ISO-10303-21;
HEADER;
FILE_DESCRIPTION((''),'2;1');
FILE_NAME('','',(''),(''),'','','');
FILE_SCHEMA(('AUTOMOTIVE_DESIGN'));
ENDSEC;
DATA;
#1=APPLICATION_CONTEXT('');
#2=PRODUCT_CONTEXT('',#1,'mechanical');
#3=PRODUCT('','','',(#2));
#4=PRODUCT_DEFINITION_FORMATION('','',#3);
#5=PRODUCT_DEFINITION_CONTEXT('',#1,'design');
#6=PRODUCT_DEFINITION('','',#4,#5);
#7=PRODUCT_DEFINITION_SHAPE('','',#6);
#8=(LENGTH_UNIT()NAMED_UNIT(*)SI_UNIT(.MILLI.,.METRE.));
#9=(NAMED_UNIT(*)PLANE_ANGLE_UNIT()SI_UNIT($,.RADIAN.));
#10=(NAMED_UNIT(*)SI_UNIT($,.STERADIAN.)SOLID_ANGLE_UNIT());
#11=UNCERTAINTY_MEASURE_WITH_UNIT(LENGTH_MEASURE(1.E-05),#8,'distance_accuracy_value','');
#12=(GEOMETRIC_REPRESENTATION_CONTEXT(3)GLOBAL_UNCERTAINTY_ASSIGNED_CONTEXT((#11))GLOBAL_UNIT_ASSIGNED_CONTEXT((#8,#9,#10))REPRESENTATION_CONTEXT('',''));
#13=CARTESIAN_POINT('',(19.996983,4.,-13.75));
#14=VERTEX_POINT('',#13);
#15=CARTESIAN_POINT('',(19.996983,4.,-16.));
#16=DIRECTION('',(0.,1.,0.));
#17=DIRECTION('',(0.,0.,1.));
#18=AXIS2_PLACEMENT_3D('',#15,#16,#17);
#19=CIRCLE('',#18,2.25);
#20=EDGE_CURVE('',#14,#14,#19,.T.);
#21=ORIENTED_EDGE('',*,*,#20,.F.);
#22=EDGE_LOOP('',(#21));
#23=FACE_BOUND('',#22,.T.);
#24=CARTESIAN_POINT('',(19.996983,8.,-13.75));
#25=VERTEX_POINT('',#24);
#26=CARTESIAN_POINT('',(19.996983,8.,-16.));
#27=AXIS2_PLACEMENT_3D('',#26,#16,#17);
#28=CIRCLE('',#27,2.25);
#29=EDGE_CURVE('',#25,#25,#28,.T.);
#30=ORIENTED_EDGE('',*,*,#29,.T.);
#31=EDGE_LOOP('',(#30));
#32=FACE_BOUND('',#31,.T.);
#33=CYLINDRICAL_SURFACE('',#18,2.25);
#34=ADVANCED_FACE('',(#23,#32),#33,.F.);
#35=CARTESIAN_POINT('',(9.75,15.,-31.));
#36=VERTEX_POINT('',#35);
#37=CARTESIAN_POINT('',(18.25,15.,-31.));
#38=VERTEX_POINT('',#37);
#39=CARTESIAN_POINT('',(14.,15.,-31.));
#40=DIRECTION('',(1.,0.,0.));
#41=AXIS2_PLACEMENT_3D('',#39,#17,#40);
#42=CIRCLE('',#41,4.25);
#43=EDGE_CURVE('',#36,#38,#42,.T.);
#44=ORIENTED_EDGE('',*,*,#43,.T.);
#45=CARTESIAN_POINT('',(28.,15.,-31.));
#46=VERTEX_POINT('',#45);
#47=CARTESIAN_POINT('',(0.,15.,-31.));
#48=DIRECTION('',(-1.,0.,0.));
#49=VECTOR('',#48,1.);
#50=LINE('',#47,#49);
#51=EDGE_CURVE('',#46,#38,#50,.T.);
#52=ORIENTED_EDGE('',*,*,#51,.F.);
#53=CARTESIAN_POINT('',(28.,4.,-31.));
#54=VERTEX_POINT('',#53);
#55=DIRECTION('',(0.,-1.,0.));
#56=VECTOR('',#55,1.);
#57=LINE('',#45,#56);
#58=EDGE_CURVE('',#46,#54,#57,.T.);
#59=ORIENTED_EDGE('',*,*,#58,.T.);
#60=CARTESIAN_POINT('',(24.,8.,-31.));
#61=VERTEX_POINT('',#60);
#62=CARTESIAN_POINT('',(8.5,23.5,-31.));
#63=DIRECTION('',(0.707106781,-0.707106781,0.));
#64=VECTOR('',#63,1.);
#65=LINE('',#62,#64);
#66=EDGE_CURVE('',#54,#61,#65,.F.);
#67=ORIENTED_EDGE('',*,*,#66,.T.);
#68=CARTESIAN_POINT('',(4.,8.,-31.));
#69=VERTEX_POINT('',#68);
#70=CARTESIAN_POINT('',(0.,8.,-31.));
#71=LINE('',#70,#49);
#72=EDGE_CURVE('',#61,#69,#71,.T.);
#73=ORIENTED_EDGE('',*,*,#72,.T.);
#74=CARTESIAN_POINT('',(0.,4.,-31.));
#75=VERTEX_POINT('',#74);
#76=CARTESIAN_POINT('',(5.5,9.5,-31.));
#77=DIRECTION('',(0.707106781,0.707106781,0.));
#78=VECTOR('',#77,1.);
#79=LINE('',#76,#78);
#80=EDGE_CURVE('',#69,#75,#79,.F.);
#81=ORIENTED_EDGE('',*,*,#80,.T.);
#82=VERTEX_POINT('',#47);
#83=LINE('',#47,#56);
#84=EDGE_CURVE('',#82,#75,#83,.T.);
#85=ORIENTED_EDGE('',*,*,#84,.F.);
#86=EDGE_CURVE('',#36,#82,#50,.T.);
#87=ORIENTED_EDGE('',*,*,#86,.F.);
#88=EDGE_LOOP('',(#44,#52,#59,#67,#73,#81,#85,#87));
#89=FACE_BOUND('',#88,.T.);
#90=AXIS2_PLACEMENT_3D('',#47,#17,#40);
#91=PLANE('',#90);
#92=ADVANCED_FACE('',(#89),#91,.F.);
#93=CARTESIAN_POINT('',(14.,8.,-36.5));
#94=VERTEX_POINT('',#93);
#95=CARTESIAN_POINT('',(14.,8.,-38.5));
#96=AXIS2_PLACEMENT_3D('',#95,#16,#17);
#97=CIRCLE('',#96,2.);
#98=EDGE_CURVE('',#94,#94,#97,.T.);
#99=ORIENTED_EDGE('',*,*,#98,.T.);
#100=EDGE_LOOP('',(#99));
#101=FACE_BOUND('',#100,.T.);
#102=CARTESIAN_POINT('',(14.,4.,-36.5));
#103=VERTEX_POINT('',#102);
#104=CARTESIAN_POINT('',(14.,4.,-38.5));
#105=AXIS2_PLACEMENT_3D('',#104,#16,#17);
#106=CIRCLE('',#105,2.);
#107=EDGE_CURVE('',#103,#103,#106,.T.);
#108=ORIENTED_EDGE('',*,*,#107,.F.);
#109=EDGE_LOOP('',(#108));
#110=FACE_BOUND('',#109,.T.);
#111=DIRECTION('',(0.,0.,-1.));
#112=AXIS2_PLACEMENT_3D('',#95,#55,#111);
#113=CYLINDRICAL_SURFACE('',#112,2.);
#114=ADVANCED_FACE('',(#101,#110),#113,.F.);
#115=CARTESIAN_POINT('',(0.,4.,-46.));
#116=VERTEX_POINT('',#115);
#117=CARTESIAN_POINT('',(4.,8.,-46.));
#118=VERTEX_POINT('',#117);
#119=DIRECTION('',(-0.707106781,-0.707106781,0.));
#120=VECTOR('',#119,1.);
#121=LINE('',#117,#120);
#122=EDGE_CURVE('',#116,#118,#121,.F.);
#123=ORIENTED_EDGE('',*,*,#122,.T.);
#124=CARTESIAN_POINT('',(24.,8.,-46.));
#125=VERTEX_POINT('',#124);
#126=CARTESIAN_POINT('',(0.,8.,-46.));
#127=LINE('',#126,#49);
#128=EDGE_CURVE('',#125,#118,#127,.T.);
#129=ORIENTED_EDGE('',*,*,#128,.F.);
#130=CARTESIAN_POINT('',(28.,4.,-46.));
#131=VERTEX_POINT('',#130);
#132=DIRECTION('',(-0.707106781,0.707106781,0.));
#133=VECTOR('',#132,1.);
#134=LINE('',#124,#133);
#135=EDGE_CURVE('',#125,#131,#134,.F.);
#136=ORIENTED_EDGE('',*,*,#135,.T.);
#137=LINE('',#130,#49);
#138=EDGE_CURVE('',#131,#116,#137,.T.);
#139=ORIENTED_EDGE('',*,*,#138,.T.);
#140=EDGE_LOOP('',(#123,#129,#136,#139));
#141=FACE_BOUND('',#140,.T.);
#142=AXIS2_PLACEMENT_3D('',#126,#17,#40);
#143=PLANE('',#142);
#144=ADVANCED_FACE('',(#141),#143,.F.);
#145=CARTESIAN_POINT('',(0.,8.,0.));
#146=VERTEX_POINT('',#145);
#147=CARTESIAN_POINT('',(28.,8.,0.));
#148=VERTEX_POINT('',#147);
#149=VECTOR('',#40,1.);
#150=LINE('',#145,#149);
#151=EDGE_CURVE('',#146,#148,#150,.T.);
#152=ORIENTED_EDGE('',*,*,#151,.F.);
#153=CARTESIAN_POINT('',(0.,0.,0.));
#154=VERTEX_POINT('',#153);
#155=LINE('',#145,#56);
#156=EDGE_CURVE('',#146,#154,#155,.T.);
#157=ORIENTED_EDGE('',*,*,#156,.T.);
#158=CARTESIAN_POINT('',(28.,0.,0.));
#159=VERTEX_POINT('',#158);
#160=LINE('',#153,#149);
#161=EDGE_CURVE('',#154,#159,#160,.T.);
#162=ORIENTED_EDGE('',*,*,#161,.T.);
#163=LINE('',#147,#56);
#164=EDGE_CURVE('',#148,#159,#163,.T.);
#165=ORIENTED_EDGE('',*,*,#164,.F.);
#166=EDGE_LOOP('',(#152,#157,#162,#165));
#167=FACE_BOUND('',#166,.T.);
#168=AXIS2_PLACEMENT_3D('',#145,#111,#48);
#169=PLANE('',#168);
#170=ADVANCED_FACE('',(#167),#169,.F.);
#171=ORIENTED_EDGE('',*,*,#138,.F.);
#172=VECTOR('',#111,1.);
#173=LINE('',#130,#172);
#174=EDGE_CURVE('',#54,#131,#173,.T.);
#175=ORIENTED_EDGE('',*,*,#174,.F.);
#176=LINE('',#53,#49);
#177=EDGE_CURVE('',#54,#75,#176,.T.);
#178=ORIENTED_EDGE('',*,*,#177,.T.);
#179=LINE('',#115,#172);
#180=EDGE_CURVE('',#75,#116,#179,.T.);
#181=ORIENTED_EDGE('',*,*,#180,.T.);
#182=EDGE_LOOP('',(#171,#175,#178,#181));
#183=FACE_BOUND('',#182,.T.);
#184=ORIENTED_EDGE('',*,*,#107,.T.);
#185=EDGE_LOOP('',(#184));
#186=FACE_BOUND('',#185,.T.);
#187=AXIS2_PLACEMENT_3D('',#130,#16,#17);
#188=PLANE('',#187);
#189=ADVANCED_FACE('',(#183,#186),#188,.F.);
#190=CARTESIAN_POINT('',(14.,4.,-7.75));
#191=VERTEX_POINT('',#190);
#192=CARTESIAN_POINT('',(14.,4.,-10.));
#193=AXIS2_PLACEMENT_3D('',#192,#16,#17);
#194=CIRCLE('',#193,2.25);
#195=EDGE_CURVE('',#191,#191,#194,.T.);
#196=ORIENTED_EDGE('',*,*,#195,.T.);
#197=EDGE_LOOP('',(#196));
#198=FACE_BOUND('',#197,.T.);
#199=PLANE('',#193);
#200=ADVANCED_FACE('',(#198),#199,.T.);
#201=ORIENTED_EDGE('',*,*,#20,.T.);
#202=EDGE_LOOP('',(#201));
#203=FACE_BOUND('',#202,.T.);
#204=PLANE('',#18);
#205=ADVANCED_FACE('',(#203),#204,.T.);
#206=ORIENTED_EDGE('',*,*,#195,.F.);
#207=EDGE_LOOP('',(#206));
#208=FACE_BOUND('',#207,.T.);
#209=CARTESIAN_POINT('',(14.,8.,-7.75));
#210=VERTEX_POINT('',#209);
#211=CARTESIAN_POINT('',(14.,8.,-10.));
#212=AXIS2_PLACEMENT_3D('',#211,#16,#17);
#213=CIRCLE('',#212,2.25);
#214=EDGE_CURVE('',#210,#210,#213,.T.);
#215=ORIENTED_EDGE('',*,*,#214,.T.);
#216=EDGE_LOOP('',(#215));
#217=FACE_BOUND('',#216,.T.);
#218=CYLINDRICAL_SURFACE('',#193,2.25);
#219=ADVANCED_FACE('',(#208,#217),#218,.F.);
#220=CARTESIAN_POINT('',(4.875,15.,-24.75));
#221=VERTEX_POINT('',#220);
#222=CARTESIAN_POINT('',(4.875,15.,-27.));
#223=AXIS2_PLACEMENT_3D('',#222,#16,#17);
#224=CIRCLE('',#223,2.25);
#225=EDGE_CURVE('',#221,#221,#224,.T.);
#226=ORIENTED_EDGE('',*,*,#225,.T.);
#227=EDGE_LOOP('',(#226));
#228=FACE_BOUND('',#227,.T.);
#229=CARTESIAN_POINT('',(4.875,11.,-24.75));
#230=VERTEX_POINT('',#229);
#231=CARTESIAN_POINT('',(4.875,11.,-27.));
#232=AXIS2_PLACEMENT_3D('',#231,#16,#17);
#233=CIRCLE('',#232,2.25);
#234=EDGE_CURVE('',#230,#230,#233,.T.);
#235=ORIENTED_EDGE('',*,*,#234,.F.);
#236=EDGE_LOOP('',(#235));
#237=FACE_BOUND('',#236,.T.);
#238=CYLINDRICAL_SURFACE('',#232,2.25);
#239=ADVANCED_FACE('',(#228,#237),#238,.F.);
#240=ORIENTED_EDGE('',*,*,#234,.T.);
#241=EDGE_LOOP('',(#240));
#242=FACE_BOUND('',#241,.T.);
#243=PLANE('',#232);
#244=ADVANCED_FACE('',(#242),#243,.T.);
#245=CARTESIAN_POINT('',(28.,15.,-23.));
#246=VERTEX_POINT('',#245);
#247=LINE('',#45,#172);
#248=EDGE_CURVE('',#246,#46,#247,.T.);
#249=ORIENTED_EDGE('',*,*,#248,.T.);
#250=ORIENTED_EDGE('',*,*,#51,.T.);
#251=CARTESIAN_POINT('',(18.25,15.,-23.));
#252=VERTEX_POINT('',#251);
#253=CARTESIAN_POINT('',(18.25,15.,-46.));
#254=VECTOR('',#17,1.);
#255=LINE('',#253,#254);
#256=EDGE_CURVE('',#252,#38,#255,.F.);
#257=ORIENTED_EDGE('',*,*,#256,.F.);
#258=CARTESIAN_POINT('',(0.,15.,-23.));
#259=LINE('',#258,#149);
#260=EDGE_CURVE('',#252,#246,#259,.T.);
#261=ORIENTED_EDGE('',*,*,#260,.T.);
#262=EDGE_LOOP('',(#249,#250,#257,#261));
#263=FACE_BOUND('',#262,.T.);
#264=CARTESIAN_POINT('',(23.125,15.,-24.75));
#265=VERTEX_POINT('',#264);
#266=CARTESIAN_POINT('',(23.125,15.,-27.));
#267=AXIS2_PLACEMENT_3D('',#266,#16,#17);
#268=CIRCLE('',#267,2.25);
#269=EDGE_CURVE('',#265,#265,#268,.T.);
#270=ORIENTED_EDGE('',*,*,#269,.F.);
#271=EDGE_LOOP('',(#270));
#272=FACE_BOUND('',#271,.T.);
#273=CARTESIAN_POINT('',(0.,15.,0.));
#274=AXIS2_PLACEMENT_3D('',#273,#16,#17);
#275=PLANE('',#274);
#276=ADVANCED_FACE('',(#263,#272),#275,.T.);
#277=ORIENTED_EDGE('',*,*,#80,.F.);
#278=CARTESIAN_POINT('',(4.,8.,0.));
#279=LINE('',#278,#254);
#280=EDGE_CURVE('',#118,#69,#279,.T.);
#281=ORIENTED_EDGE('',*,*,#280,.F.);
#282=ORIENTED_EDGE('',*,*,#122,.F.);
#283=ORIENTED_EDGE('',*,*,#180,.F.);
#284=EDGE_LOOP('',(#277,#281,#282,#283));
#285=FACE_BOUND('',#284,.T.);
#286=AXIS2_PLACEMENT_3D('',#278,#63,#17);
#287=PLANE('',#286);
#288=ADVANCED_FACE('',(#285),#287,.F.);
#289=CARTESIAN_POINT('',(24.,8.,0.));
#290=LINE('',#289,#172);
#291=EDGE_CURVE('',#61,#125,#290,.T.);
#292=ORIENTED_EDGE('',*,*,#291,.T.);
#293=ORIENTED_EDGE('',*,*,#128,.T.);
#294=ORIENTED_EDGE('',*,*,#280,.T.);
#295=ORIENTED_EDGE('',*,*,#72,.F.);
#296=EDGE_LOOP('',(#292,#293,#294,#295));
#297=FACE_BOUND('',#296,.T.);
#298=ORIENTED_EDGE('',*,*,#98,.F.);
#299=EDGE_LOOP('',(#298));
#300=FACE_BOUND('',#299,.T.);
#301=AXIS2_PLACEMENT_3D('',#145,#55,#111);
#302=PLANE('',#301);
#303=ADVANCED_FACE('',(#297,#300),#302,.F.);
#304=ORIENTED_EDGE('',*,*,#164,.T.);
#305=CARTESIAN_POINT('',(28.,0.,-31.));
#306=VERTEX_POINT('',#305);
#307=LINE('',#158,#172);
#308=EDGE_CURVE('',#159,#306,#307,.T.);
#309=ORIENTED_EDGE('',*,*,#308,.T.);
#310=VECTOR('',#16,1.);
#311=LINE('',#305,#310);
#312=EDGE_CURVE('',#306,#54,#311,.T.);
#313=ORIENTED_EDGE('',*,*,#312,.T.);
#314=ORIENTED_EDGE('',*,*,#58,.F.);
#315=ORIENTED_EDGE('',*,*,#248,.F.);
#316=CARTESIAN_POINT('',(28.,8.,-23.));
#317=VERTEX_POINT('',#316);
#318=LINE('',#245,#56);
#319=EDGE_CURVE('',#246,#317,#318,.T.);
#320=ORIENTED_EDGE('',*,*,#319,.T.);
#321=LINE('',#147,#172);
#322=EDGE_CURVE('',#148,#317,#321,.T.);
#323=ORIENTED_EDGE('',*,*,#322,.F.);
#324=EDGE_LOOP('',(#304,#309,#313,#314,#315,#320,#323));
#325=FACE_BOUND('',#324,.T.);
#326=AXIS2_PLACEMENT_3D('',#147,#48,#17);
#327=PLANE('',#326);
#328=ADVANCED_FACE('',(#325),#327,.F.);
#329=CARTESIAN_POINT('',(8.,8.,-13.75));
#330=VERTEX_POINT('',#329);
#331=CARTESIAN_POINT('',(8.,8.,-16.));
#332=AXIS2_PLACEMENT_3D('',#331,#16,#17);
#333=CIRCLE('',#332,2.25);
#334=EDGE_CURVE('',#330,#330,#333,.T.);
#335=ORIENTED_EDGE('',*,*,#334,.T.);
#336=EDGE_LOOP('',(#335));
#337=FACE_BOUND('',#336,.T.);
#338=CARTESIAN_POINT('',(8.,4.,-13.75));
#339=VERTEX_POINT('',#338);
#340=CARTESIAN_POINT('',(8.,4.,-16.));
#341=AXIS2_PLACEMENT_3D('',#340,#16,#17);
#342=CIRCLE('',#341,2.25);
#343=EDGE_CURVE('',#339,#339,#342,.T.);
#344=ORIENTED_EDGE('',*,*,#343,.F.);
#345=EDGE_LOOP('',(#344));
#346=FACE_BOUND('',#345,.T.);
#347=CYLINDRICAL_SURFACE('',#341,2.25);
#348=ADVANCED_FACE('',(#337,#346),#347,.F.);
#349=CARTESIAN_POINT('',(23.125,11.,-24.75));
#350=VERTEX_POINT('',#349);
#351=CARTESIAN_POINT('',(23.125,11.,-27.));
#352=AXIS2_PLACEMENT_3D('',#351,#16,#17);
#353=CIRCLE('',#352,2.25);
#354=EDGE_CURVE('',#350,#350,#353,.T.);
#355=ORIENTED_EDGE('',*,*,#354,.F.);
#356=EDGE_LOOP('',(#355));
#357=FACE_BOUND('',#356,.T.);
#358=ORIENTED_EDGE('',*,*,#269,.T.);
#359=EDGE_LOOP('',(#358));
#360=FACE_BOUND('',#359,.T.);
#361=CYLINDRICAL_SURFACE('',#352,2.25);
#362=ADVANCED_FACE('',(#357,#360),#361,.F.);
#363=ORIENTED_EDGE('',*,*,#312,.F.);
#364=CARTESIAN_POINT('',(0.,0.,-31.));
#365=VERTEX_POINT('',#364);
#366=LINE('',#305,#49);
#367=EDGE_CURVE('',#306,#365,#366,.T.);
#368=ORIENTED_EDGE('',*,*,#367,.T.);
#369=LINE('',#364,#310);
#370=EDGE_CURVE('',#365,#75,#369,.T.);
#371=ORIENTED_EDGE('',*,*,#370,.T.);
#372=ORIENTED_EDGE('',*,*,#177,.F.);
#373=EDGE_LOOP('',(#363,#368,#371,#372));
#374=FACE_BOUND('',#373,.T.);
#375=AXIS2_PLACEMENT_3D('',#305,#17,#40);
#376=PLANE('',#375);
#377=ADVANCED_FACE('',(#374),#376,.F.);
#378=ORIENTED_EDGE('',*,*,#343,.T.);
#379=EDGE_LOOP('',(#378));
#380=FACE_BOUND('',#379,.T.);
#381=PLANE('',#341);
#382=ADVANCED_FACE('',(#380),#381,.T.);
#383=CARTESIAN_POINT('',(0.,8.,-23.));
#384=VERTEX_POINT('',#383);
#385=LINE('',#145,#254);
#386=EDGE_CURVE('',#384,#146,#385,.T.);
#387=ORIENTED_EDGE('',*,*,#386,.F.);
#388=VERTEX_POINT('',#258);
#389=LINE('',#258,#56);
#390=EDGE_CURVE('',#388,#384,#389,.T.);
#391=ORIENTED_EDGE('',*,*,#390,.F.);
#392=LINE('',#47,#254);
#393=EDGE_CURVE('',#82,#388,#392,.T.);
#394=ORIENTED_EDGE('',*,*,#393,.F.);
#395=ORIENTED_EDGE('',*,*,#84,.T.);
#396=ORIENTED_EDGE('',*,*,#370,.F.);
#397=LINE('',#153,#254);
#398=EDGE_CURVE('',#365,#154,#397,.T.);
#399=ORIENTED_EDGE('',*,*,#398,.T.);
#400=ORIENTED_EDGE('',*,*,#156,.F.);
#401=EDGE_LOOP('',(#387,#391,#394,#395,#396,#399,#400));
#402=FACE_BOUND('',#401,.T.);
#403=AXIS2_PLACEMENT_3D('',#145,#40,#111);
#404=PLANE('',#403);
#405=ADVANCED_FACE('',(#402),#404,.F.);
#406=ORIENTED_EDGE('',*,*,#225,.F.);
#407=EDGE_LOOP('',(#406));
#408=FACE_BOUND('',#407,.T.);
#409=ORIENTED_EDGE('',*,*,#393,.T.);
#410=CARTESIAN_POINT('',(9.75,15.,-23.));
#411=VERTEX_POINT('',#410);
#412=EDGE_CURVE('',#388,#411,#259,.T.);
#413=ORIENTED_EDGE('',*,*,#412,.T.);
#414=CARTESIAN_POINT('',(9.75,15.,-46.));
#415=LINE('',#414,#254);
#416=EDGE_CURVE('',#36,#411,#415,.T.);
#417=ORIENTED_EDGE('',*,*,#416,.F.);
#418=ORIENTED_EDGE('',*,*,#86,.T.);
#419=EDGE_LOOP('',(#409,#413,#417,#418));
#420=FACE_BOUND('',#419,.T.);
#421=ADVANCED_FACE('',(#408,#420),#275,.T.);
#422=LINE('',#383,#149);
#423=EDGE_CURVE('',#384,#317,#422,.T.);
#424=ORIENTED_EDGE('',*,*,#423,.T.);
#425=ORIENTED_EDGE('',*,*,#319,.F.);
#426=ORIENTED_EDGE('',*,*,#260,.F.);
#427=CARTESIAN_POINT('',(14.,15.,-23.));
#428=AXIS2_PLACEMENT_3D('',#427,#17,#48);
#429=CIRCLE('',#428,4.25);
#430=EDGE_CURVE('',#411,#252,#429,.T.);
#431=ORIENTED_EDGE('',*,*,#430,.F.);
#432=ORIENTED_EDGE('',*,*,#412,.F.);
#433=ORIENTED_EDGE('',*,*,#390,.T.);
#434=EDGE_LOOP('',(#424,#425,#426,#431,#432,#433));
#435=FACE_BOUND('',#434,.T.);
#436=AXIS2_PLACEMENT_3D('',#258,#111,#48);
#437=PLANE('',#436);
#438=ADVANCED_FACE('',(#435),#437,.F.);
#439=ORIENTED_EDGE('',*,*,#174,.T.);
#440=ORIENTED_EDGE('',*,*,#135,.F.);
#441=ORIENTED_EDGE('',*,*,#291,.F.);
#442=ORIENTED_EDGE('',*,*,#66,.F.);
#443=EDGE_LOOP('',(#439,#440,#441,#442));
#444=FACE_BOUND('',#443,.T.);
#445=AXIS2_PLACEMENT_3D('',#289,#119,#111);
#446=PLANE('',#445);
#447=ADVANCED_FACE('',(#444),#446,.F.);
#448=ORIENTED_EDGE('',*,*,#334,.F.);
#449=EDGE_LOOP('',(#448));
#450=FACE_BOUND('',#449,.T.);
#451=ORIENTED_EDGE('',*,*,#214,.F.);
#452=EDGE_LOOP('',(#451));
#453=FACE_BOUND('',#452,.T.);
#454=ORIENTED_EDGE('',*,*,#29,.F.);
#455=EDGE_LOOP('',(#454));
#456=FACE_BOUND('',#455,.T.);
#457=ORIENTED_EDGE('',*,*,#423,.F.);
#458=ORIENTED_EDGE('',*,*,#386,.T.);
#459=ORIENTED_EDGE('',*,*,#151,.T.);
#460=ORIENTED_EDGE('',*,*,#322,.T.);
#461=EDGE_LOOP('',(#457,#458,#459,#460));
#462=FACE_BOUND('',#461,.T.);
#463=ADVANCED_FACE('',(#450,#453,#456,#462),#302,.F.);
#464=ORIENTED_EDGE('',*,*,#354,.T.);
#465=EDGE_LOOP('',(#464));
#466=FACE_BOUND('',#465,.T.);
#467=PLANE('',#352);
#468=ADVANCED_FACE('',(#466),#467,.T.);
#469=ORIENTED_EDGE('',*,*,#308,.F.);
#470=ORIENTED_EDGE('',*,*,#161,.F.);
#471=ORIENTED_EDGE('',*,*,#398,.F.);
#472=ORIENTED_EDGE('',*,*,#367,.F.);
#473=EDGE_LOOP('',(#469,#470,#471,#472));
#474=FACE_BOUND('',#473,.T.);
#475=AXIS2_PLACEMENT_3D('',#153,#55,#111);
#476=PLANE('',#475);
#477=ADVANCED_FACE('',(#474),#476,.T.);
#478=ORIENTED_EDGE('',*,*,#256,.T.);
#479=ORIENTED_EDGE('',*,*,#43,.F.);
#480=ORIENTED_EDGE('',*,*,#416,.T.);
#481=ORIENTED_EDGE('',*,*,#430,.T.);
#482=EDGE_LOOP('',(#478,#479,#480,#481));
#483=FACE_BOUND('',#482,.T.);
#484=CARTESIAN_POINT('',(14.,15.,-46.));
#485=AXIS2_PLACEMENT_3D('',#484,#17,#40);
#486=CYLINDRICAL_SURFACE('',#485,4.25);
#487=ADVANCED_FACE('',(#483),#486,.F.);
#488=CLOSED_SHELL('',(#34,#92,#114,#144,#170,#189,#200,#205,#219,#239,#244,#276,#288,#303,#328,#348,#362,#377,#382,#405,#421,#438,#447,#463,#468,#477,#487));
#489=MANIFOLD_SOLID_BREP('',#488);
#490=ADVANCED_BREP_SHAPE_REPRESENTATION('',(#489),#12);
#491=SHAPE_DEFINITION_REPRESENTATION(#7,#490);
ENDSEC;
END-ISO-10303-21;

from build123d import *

# Parameters (mm, degrees)
SKETCH1_W                             = 28
SKETCH1_H                             = 46
SKETCH1_R                             = 2
BOSS_EXTRUDE1_DEPTH                   = 8
SKETCH6_R                             = 2.25
DRAGCHAINMOUNTHOLESCUT_EXTRUDE1_DEPTH = 4
SKETCH2_W                             = 28
SKETCH2_H                             = 8
BRIDGEBOSS_EXTRUDE2_DEPTH             = 7
GROMMETCUT_EXTRUDE3_DEPTH             = 40.217343102
BRIDGEMOUNTHOLESSKETCH4_R             = 2.25
BRIDGEMOUNTHOLESCUT_EXTRUDE4_DEPTH    = 4
SKETCH5_W                             = 15
SKETCH5_H                             = 4
EDGECUT_EXTRUDE5_DEPTH                = 56.901699437
CHAMFER1_SIZE                         = 4


with BuildPart() as part:
    # Sketch1 → Boss-Extrude1 (new body)
    with BuildSketch(Plane(origin=(0, 0, 0), x_dir=(1, 0, 0), z_dir=(0, 1, 0))):
        with Locations((14, 23)):
            Rectangle(SKETCH1_W, SKETCH1_H)
        with Locations(Location((14, 38.5, 0), (0, 0, 270))):
            Circle(SKETCH1_R, mode=Mode.SUBTRACT)
    extrude(amount=BOSS_EXTRUDE1_DEPTH)

    # Sketch6 → DragChainMountHolesCut-Extrude1 (cut)
    with BuildSketch(Plane(origin=(0, 8, 0), x_dir=(1, 0, 0), z_dir=(0, 1, 0))):
        with Locations(Location((8, 16, 0), (0, 0, 270))):
            Circle(SKETCH6_R)
        with Locations(Location((19.996983409, 16, 0), (0, 0, 270))):
            Circle(SKETCH6_R)
        with Locations(Location((14, 10, 0), (0, 0, 270))):
            Circle(SKETCH6_R)
    extrude(amount=-DRAGCHAINMOUNTHOLESCUT_EXTRUDE1_DEPTH, mode=Mode.SUBTRACT)

    # Sketch2 → BridgeBoss-Extrude2 (add)
    with BuildSketch(Plane(origin=(0, 8, 0), x_dir=(1, 0, 0), z_dir=(0, 1, 0))):
        with Locations((14, 27)):
            Rectangle(SKETCH2_W, SKETCH2_H)
    extrude(amount=BRIDGEBOSS_EXTRUDE2_DEPTH)

    # Sketch3 → GrommetCut-Extrude3 (cut, through all)
    with BuildSketch(Plane.XY.offset(-23)):
        with BuildLine():
            Line((9.75, 15), (18.25, 15))
            ThreePointArc((18.25, 15), (14, 10.75), (9.75, 15))
        make_face()
    extrude(amount=-GROMMETCUT_EXTRUDE3_DEPTH, mode=Mode.SUBTRACT)

    # BridgeMountHolesSketch4 → BridgeMountholesCut-Extrude4 (cut)
    with BuildSketch(Plane(origin=(0, 15, 0), x_dir=(1, 0, 0), z_dir=(0, 1, 0))):
        with Locations(Location((4.875, 27, 0), (0, 0, 270))):
            Circle(BRIDGEMOUNTHOLESSKETCH4_R)
        with Locations(Location((23.125, 27, 0), (0, 0, 270))):
            Circle(BRIDGEMOUNTHOLESSKETCH4_R)
    extrude(amount=-BRIDGEMOUNTHOLESCUT_EXTRUDE4_DEPTH, mode=Mode.SUBTRACT)

    # Sketch5 → EdgeCut-Extrude5 (cut, through all)
    with BuildSketch(Plane.ZY):
        with Locations((-38.5, 2)):
            Rectangle(SKETCH5_W, SKETCH5_H)
    extrude(amount=-EDGECUT_EXTRUDE5_DEPTH, mode=Mode.SUBTRACT)

    # Chamfer1
    chamfer1_edges = [part.edges().sort_by_distance(p)[0] for p in [
        (28, 8, -38.5),
        (0, 8, -38.5),
    ]]
    chamfer(chamfer1_edges, length=CHAMFER1_SIZE - 0.0001)  # a hair under: the kernel refuses the full size


solid = part.part
